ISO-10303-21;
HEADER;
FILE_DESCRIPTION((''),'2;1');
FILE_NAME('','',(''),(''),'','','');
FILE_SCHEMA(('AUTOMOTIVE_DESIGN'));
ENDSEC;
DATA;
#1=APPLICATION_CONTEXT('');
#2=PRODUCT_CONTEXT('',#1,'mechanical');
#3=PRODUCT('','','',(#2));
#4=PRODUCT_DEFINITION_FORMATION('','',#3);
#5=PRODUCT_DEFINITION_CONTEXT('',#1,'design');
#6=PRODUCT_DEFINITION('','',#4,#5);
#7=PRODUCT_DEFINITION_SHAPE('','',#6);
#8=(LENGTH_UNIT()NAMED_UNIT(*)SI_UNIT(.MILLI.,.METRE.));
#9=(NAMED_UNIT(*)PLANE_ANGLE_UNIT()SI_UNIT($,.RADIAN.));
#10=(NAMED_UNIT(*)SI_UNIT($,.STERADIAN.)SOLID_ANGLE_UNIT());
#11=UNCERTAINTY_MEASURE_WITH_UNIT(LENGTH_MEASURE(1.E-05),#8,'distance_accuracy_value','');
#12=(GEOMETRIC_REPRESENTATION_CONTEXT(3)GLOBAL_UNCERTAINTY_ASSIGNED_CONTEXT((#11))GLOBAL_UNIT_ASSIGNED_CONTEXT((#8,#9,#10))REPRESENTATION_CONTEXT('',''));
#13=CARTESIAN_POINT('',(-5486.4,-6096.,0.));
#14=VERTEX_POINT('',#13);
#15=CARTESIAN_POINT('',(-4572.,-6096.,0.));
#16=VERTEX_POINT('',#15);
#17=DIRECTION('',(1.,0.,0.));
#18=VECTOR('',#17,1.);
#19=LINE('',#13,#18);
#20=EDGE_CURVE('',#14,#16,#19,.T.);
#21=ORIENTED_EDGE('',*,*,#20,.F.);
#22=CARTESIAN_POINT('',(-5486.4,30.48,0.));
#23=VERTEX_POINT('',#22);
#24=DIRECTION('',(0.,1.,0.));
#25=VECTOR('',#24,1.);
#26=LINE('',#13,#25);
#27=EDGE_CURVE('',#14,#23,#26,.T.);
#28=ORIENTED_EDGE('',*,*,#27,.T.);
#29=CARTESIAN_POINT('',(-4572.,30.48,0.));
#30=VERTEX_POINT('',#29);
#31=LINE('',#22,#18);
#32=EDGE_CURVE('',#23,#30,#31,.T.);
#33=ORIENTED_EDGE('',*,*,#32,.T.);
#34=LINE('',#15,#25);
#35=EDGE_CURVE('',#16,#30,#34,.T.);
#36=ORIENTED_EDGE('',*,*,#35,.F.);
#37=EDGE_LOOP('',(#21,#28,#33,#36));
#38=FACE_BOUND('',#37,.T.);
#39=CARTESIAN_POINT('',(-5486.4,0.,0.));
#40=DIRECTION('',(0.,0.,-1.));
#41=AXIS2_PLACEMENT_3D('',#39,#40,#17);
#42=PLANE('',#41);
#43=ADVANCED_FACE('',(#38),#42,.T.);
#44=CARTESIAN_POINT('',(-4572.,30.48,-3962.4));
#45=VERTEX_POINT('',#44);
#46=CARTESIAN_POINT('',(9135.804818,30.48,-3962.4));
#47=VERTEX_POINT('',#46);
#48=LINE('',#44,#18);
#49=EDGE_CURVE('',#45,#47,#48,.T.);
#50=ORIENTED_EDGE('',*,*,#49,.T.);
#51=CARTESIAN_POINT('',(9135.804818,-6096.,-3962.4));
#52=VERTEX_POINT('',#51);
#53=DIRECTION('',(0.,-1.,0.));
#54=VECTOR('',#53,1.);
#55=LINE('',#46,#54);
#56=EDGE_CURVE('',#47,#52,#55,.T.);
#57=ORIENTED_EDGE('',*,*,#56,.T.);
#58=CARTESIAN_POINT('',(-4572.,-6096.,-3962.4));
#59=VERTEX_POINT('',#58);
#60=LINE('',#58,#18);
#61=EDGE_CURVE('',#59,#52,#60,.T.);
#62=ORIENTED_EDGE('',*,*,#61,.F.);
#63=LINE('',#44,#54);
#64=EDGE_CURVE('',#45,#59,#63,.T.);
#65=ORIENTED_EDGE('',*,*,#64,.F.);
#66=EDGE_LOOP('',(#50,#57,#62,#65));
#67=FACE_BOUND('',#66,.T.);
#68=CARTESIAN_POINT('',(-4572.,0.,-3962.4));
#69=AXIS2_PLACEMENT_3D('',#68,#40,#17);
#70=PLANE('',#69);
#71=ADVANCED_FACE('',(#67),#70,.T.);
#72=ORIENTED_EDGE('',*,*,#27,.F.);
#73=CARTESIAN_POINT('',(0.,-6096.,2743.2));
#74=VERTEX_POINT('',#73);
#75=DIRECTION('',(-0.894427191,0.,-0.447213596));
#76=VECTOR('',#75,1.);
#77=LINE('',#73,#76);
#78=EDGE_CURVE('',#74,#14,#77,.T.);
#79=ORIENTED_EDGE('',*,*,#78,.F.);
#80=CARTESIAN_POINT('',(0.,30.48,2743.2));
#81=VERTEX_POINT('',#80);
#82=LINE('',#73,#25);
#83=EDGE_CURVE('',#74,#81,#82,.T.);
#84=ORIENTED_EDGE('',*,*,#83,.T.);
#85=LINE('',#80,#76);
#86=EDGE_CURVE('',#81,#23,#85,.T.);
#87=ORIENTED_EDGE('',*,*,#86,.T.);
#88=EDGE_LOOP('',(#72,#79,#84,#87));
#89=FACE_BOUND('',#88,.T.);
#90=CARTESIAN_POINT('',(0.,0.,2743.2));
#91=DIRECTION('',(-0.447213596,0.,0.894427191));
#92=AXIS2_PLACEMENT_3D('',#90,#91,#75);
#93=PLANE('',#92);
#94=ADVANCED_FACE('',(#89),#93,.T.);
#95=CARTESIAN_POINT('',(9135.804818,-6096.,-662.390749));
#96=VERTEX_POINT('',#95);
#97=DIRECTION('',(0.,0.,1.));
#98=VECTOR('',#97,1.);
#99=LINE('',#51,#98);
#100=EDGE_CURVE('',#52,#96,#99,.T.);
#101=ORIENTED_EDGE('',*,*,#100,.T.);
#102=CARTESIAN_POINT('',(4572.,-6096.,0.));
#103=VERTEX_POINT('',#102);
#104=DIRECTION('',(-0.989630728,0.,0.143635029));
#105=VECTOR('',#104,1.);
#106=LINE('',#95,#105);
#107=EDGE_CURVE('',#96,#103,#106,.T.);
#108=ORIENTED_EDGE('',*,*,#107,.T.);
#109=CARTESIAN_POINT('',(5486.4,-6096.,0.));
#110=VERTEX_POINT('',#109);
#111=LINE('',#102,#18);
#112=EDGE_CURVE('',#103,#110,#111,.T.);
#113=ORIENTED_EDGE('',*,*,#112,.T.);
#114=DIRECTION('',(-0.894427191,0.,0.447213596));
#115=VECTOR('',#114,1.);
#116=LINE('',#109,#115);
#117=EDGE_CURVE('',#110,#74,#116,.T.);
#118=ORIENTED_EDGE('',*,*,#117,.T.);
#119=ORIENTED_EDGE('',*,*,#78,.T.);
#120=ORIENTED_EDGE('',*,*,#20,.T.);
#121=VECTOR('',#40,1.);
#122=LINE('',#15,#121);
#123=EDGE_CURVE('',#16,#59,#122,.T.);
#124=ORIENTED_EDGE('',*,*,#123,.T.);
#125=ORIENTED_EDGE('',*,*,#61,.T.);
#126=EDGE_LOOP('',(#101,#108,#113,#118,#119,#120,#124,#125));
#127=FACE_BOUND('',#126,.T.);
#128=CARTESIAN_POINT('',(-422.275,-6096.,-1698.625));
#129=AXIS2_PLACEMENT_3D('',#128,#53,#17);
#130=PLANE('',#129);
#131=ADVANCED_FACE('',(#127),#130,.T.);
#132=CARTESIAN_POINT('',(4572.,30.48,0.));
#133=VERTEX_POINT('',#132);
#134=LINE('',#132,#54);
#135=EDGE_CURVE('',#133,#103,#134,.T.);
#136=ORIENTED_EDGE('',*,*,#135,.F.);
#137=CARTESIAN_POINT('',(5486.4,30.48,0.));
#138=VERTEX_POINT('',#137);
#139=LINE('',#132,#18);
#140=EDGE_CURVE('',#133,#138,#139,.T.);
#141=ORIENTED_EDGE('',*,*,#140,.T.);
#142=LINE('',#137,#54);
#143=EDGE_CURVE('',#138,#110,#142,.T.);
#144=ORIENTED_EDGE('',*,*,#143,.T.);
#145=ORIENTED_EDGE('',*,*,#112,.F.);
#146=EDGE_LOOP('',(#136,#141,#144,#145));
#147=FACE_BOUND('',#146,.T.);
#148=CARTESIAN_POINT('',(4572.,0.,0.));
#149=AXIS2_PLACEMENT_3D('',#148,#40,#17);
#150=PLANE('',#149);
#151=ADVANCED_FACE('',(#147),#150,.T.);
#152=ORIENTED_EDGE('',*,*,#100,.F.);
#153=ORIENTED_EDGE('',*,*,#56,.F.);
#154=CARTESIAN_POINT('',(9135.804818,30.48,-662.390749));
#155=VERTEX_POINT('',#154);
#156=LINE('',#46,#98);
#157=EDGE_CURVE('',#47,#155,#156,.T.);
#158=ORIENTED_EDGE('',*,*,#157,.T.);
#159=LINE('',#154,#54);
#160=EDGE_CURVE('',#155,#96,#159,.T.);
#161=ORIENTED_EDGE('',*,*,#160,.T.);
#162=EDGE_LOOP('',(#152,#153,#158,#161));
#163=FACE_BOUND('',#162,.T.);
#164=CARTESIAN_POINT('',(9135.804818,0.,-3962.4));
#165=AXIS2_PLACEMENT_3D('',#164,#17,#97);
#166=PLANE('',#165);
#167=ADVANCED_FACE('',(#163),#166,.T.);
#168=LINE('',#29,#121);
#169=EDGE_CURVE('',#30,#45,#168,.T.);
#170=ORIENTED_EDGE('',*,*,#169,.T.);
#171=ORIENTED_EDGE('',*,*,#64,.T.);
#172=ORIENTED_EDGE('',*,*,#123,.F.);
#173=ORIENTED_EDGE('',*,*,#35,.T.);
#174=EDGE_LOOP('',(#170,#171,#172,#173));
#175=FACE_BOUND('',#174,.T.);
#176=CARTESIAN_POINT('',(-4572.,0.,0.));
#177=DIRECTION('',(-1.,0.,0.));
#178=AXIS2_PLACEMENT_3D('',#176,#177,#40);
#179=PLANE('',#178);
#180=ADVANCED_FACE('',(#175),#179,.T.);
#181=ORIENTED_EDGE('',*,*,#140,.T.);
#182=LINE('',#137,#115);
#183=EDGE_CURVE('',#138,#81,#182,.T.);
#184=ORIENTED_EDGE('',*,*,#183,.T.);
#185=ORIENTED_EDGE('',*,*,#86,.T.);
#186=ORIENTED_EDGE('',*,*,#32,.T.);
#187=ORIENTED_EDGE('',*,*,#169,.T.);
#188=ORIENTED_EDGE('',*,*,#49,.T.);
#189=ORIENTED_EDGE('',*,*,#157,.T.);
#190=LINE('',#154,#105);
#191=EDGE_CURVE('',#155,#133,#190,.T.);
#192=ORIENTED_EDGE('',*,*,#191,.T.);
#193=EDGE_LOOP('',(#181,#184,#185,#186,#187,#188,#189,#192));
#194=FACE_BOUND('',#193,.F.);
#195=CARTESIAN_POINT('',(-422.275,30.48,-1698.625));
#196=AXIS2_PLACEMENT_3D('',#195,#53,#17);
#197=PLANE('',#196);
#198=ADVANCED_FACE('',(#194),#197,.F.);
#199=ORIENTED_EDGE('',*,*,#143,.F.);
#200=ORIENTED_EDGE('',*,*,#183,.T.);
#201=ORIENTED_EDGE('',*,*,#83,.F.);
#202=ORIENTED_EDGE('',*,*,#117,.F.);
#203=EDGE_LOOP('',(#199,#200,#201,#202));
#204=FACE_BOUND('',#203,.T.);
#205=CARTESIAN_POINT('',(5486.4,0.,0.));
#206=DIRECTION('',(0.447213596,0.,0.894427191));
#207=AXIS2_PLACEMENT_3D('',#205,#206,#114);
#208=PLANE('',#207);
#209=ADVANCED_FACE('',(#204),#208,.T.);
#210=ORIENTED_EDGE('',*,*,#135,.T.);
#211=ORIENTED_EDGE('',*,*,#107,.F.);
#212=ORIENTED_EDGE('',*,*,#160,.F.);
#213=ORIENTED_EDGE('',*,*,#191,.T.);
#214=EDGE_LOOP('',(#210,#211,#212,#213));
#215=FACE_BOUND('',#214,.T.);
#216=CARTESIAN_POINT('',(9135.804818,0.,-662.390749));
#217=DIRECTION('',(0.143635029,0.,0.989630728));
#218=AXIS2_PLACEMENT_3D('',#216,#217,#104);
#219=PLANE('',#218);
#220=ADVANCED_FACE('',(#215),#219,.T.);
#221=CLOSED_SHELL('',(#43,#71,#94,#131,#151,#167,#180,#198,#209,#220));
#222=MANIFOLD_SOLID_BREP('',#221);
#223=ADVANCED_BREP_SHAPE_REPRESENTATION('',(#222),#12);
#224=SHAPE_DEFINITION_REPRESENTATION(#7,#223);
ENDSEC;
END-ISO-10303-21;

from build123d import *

# Parameters (mm, degrees)
F0_W          = 2743.2
F0_H          = 1371.6
F0_W_2        = 1219.2
F0_H_2        = 761.5693855479
F0_W_3        = 4563.8048175471
F0_H_3        = 609.6
F0_W_4        = 914.4
F0_H_4        = 2133.6
F1_DEPTH      = 6096
F1_DEPTH_BACK = 30.48


# Not quite as in the source:
# - the program builds the solid bodies; features that only make, move or delete a surface that nothing else refers to are left out


with BuildPart() as f1:
    # F0 (on Front) → F1 (new body, two sides)
    with BuildSketch(Plane.XZ) as f1_sk:
        Polygon((4572, 0), (0, 0), (-4572, 0), (-4572, -3352.8), (-3352.8, -3352.8), (-3352.8, -1219.2), (-2438.4, -1219.2), (-2438.4, -3352.8), (4572, -3352.8), (4572, -401.1528193951), align=None)
        with Locations((1981.2, -1359.7689430237)):
            Rectangle(F0_W, F0_H, mode=Mode.SUBTRACT)
        Polygon((9135.8048175471, -1063.5435686586), (4572, -401.1528193951), (4572, -3352.8), (9135.8048175471, -3352.8), align=None)
        with Locations((6349.5722342422, -2210.4459216781)):
            Rectangle(F0_W_2, F0_H_2, mode=Mode.SUBTRACT)
        Polygon((-3352.8, -3352.8), (-4572, -3352.8), (-4572, -3962.4), (4572, -3962.4), (4572, -3352.8), (-2438.4, -3352.8), align=None)
        Polygon((-4572, 0), (0, 0), (0, 2286), align=None)
        Polygon((0, 2286), (0, 0), (4572, 0), align=None)
        with Locations((1981.2, -1359.7689430237)):
            Rectangle(F0_W, F0_H)
        with Locations((6853.9024087735, -3657.6)):
            Rectangle(F0_W_3, F0_H_3)
        Polygon((-5486.4, 0), (-4572, 0), (0, 2286), (0, 2743.2), align=None)
        Polygon((0, 2286), (4572, 0), (5486.4, 0), (0, 2743.2), align=None)
        with Locations((-2895.6, -2286)):
            Rectangle(F0_W_4, F0_H_4)
        Polygon((9135.8048175471, -662.3907492636), (4572, 0), (4572, -401.1528193951), (9135.8048175471, -1063.5435686586), align=None)
        with Locations((6349.5722342422, -2210.4459216781)):
            Rectangle(F0_W_2, F0_H_2)
    extrude(amount=F1_DEPTH)
    extrude(f1_sk.sketch, amount=-F1_DEPTH_BACK)


solid = f1.part
